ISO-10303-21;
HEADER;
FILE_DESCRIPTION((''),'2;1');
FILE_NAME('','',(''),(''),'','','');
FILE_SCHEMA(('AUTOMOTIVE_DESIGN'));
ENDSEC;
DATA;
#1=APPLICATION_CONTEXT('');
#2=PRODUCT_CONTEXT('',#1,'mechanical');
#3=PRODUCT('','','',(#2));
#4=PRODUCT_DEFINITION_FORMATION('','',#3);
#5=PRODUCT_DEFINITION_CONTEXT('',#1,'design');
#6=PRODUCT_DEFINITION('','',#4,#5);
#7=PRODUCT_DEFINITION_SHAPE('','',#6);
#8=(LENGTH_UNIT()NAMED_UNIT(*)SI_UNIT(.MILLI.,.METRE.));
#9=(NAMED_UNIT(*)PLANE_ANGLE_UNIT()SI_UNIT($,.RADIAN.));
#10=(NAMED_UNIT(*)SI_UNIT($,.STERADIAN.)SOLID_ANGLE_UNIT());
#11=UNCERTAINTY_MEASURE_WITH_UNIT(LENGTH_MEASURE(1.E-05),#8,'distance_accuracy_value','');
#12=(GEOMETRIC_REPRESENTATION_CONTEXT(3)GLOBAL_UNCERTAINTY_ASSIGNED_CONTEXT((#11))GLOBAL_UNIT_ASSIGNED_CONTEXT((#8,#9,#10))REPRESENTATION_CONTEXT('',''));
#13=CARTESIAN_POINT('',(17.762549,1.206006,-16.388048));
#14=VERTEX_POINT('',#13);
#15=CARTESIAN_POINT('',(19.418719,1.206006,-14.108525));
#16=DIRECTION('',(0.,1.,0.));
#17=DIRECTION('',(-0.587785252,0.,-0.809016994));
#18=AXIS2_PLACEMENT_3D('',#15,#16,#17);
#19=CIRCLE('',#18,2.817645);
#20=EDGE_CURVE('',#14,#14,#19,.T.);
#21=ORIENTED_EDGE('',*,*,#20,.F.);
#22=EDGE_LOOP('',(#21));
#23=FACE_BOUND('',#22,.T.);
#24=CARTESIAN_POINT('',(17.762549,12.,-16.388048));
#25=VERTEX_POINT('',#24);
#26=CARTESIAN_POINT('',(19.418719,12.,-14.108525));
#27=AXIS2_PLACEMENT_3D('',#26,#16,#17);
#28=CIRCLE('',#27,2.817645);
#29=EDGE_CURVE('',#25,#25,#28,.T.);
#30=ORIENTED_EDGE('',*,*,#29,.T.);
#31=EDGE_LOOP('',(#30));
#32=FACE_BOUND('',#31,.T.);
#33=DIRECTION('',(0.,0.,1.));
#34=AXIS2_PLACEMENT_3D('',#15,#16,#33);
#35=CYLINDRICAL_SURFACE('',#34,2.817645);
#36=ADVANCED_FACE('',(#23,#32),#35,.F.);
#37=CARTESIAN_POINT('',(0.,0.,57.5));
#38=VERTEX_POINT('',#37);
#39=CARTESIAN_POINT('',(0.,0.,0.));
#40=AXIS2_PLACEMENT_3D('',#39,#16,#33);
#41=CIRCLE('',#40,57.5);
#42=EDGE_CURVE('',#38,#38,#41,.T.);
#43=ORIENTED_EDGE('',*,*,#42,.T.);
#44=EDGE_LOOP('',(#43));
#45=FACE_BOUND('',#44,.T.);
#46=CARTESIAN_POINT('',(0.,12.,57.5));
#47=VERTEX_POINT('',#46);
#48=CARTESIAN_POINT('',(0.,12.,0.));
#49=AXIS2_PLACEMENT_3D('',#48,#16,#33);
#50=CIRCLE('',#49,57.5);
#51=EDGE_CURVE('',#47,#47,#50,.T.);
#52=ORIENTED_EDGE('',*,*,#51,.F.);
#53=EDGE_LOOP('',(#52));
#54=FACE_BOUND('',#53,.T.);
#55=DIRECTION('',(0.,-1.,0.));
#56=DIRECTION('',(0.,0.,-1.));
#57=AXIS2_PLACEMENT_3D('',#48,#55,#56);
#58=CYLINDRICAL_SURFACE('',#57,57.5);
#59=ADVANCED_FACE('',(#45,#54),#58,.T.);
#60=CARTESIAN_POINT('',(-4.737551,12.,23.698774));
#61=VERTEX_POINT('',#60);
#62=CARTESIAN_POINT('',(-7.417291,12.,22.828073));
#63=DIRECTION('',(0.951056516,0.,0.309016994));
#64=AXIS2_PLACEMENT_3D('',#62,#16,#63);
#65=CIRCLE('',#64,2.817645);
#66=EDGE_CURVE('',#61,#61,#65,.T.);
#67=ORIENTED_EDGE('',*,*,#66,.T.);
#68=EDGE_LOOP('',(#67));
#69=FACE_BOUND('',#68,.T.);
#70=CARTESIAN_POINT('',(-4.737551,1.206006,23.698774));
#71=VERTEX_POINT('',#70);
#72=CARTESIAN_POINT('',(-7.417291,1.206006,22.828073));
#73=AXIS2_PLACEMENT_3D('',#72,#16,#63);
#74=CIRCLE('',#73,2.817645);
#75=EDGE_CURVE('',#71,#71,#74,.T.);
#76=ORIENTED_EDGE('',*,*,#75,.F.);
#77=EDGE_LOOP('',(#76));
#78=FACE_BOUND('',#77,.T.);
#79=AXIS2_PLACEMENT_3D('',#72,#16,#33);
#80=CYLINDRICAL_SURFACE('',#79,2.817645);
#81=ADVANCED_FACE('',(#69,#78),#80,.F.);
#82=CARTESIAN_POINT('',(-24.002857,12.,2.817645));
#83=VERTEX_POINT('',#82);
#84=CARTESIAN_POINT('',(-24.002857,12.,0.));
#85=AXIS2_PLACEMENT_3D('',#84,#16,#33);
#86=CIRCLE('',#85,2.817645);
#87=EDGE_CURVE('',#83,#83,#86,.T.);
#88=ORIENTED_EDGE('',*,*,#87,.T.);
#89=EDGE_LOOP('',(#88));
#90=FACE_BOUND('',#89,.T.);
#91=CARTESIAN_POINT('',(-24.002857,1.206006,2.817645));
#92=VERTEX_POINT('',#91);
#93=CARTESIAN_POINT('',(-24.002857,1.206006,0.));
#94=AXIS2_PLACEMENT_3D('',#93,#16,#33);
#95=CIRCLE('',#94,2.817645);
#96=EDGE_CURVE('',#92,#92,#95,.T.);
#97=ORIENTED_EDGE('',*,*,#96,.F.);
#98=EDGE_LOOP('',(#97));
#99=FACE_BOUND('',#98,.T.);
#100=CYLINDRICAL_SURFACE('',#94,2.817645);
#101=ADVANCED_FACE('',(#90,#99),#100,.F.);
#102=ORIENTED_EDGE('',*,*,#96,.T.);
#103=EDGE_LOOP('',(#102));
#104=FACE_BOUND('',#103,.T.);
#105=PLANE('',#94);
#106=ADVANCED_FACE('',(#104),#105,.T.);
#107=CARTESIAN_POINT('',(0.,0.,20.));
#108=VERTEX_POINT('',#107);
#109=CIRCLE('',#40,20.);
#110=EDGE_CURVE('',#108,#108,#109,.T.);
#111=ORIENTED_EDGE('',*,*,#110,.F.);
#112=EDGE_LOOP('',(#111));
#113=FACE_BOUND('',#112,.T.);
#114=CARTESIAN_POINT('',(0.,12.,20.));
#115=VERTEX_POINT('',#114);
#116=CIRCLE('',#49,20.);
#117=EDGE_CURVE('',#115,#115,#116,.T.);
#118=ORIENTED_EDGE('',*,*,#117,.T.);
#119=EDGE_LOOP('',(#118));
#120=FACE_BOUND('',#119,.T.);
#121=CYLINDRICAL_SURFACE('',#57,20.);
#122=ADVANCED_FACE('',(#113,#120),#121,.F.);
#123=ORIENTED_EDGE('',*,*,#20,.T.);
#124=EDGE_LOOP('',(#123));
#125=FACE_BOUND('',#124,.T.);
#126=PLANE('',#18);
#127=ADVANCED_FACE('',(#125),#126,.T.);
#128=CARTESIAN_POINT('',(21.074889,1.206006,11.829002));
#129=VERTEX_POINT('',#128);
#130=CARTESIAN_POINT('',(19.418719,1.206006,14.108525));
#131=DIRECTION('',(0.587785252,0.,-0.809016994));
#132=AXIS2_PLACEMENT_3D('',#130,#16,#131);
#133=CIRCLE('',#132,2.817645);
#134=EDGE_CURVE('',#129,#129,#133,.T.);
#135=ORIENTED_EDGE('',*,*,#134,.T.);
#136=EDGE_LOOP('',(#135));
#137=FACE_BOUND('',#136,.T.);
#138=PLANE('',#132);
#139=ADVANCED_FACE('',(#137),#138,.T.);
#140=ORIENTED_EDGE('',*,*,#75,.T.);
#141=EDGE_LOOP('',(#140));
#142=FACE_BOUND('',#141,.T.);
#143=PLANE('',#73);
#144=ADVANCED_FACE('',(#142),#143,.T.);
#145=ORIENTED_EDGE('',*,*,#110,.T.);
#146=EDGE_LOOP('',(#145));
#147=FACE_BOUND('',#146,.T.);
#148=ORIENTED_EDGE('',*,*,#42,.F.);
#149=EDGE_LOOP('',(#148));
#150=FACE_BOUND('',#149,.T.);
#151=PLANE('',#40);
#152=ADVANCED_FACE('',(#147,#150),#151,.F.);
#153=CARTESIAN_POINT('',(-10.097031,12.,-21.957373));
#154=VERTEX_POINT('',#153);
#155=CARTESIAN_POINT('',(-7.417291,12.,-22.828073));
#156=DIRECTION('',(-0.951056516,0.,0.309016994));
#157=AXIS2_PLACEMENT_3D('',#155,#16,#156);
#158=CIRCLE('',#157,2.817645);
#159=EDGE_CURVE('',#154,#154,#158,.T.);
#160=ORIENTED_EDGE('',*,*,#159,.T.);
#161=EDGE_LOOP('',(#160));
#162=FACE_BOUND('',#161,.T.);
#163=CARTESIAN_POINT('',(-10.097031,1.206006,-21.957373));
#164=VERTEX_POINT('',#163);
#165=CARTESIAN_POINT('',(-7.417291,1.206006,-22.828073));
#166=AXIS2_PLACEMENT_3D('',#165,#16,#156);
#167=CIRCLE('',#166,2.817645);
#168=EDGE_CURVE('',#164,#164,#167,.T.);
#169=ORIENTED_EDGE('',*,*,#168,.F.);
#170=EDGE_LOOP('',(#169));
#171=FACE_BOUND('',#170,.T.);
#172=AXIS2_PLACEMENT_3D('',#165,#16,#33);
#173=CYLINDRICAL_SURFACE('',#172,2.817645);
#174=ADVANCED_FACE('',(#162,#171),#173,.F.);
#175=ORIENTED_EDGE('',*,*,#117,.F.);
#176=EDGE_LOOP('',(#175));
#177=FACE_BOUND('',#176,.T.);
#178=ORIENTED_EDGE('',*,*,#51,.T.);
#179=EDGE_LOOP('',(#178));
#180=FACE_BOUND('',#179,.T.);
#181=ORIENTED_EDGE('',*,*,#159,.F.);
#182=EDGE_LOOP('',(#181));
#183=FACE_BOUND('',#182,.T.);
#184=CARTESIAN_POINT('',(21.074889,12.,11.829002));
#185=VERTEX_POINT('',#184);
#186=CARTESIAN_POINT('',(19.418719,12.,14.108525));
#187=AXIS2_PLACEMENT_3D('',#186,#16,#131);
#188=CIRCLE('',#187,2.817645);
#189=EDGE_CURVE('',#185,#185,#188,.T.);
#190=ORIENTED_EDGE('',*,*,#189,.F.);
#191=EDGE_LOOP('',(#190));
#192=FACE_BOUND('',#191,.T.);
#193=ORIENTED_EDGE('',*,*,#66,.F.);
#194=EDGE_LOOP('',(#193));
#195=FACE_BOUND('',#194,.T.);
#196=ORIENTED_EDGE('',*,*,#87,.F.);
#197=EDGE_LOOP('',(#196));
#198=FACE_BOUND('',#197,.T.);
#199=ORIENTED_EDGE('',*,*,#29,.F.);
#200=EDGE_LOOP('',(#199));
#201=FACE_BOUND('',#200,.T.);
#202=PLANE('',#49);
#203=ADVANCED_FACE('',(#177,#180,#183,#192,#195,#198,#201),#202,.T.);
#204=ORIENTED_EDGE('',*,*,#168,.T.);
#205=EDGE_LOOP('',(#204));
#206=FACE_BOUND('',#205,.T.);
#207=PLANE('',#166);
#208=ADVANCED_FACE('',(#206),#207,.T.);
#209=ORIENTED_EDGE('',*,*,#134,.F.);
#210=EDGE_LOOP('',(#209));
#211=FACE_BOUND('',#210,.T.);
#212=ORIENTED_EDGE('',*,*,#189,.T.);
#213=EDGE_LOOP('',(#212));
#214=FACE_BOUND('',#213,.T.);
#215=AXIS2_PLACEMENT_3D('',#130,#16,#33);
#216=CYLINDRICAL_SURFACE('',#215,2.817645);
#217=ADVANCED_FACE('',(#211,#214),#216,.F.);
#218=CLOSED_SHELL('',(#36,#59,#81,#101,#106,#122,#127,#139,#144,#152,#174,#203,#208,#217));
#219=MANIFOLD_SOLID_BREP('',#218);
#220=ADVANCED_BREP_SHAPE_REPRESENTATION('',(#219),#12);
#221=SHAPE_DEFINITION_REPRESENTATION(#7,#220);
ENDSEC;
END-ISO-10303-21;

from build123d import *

# Parameters (mm, degrees)
SKETCH1_R           = 57.5
BOSS_EXTRUDE1_DEPTH = 12
SKETCH2_R           = 20
CUT_EXTRUDE1_DEPTH  = 83.197931847
SKETCH3_R           = 2.817645385
CUT_EXTRUDE2_DEPTH  = 10.793993775
CIRPATTERN1_COUNT   = 5


with BuildPart() as part:
    # Sketch1 → Boss-Extrude1 (new body)
    with BuildSketch(Plane(origin=(0, 0, 0), x_dir=(1, 0, 0), z_dir=(0, 1, 0))):
        Circle(SKETCH1_R)
    extrude(amount=BOSS_EXTRUDE1_DEPTH)

    # Sketch2 → Cut-Extrude1 (cut, through all)
    with BuildSketch(Plane(origin=(0, 0, 0), x_dir=(1, 0, 0), z_dir=(0, 1, 0))):
        Circle(SKETCH2_R)
    extrude(amount=CUT_EXTRUDE1_DEPTH, mode=Mode.SUBTRACT)

    # Sketch3 → Cut-Extrude2 (cut)
    with BuildSketch(Plane(origin=(0, 12, 0), x_dir=(1, 0, 0), z_dir=(0, 1, 0))):
        with Locations((-24.002856674, 0)):
            Circle(SKETCH3_R)
    cut_extrude2 = extrude(amount=-CUT_EXTRUDE2_DEPTH, mode=Mode.SUBTRACT)

    # CirPattern1: Cut-Extrude2 ×5 about axis
    cirpattern1_axis = Axis((0, 0, 0), (0, 1, 0))
    for i in range(1, CIRPATTERN1_COUNT):
        add(cut_extrude2.rotate(cirpattern1_axis, i * 360 / CIRPATTERN1_COUNT), mode=Mode.SUBTRACT)


solid = part.part
